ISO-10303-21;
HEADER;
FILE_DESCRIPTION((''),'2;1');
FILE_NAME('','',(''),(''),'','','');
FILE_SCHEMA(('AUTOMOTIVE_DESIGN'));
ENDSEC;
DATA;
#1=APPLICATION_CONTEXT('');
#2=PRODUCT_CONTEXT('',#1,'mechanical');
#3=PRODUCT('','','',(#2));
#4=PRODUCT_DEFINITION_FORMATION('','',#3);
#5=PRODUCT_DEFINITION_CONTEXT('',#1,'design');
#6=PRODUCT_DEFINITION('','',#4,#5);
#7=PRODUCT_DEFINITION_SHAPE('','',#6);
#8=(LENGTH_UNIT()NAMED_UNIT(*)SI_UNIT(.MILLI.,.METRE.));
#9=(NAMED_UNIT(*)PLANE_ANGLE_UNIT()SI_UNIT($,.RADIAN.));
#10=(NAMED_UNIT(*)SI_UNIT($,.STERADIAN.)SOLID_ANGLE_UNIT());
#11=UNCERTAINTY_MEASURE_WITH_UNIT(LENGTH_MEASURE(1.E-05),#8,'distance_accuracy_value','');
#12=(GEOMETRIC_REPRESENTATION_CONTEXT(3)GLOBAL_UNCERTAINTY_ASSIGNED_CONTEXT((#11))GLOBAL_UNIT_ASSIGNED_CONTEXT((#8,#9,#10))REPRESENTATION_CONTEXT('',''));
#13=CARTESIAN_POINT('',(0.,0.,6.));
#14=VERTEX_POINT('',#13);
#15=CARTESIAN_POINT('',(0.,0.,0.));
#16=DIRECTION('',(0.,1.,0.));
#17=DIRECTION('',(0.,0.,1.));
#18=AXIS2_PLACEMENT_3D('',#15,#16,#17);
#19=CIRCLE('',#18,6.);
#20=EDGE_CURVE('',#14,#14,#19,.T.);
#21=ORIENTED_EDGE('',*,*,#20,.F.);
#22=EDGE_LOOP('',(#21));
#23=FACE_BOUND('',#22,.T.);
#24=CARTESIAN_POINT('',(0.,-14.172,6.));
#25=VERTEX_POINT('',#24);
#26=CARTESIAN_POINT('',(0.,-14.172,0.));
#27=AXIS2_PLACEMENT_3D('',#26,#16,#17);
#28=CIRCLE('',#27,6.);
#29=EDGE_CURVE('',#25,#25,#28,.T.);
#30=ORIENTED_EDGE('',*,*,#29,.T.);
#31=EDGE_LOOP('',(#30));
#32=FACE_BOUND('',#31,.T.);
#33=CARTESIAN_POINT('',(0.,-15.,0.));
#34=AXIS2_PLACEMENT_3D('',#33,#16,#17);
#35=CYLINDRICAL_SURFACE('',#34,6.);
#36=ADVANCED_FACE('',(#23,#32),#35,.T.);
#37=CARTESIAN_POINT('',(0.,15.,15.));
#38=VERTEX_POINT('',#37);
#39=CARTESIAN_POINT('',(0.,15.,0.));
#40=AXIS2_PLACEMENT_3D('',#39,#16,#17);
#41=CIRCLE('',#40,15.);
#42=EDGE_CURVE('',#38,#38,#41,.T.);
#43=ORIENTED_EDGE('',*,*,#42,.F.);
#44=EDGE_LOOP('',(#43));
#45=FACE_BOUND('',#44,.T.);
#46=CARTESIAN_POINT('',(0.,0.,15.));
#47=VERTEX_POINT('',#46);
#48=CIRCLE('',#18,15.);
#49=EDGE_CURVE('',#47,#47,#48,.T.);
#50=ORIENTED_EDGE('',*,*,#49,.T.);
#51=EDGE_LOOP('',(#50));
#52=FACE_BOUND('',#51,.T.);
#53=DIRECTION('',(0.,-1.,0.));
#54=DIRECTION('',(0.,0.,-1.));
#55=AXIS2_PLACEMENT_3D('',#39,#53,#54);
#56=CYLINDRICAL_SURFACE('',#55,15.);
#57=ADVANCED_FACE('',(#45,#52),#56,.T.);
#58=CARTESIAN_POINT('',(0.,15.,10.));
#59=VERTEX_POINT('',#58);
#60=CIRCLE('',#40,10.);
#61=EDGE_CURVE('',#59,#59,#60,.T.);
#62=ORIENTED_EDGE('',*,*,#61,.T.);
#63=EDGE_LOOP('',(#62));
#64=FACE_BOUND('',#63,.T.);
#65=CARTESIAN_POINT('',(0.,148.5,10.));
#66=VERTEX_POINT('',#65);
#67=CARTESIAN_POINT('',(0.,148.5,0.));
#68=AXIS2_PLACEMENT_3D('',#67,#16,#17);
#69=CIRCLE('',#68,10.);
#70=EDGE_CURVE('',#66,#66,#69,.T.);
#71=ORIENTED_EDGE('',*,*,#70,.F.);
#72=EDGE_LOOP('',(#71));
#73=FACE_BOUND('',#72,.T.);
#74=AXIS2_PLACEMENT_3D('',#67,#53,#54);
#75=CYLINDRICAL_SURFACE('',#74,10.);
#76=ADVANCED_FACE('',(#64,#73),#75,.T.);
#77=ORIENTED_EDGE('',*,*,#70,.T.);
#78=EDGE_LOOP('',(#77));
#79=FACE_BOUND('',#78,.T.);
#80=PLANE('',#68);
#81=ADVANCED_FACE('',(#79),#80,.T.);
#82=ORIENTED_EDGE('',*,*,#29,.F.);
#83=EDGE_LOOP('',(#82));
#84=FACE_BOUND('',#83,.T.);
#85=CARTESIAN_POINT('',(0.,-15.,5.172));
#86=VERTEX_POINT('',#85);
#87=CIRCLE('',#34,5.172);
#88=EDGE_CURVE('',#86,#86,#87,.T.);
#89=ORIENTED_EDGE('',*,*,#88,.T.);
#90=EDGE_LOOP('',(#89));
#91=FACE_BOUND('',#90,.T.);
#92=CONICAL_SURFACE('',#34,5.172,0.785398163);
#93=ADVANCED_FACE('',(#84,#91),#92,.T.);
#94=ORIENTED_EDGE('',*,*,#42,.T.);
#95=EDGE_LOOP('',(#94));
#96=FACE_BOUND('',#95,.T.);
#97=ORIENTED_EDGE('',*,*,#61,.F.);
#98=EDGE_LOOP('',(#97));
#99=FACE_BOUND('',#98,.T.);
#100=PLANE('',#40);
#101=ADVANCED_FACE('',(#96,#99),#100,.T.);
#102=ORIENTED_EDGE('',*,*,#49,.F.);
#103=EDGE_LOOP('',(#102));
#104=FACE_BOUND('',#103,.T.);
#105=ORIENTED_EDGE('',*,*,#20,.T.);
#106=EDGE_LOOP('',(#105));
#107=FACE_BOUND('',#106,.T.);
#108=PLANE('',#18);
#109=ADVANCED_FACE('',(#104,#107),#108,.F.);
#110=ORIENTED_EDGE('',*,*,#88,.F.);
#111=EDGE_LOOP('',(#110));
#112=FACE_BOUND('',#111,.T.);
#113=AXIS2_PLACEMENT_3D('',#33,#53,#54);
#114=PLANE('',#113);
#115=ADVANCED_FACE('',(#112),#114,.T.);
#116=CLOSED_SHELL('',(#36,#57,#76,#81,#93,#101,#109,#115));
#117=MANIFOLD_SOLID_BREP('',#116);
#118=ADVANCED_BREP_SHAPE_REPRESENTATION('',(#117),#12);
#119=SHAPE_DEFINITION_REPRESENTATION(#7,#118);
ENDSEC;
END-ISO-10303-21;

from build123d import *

# Parameters (mm, degrees)
SKETCH1_R           = 15
BOSS_EXTRUDE1_DEPTH = 15
SKETCH2_R           = 10
BOSS_EXTRUDE2_DEPTH = 133.5
SKETCH4_R           = 7.5
BOSS_EXTRUDE3_DEPTH = 15


# Read off the part's stored shape, not the designer's step: M12x1.5 Machine Threads Stud1
with BuildPart() as part:
    # Sketch1 → Boss-Extrude1 (new body)
    with BuildSketch(Plane(origin=(0, 0, 0), x_dir=(1, 0, 0), z_dir=(0, 1, 0))):
        with Locations(Location((0, 0, 0), (0, 0, 270))):
            Circle(SKETCH1_R)
    extrude(amount=BOSS_EXTRUDE1_DEPTH)

    # Sketch2 → Boss-Extrude2 (add)
    with BuildSketch(Plane(origin=(0, 15, 0), x_dir=(1, 0, 0), z_dir=(0, 1, 0))):
        with Locations(Location((0, 0, 0), (0, 0, 270))):
            Circle(SKETCH2_R)
    extrude(amount=BOSS_EXTRUDE2_DEPTH)

    # Sketch4 → Boss-Extrude3 (add)
    with BuildSketch(Plane.XZ):
        with Locations(Location((0, 0, 0), (0, 0, 270))):
            Circle(SKETCH4_R)
    extrude(amount=BOSS_EXTRUDE3_DEPTH)

    # M12x1.5 Machine Threads Stud1 outline → M12x1.5 Machine Threads Stud1 (revolve, cut)
    with BuildSketch(Plane.XY):
        Polygon((7.5, 0), (6, 0), (6, -14.172), (5.172, -15), (7.5, -15), align=None)
    revolve(axis=Axis((0, 0, 0), (0, 1, 0)), mode=Mode.SUBTRACT)


solid = part.part
